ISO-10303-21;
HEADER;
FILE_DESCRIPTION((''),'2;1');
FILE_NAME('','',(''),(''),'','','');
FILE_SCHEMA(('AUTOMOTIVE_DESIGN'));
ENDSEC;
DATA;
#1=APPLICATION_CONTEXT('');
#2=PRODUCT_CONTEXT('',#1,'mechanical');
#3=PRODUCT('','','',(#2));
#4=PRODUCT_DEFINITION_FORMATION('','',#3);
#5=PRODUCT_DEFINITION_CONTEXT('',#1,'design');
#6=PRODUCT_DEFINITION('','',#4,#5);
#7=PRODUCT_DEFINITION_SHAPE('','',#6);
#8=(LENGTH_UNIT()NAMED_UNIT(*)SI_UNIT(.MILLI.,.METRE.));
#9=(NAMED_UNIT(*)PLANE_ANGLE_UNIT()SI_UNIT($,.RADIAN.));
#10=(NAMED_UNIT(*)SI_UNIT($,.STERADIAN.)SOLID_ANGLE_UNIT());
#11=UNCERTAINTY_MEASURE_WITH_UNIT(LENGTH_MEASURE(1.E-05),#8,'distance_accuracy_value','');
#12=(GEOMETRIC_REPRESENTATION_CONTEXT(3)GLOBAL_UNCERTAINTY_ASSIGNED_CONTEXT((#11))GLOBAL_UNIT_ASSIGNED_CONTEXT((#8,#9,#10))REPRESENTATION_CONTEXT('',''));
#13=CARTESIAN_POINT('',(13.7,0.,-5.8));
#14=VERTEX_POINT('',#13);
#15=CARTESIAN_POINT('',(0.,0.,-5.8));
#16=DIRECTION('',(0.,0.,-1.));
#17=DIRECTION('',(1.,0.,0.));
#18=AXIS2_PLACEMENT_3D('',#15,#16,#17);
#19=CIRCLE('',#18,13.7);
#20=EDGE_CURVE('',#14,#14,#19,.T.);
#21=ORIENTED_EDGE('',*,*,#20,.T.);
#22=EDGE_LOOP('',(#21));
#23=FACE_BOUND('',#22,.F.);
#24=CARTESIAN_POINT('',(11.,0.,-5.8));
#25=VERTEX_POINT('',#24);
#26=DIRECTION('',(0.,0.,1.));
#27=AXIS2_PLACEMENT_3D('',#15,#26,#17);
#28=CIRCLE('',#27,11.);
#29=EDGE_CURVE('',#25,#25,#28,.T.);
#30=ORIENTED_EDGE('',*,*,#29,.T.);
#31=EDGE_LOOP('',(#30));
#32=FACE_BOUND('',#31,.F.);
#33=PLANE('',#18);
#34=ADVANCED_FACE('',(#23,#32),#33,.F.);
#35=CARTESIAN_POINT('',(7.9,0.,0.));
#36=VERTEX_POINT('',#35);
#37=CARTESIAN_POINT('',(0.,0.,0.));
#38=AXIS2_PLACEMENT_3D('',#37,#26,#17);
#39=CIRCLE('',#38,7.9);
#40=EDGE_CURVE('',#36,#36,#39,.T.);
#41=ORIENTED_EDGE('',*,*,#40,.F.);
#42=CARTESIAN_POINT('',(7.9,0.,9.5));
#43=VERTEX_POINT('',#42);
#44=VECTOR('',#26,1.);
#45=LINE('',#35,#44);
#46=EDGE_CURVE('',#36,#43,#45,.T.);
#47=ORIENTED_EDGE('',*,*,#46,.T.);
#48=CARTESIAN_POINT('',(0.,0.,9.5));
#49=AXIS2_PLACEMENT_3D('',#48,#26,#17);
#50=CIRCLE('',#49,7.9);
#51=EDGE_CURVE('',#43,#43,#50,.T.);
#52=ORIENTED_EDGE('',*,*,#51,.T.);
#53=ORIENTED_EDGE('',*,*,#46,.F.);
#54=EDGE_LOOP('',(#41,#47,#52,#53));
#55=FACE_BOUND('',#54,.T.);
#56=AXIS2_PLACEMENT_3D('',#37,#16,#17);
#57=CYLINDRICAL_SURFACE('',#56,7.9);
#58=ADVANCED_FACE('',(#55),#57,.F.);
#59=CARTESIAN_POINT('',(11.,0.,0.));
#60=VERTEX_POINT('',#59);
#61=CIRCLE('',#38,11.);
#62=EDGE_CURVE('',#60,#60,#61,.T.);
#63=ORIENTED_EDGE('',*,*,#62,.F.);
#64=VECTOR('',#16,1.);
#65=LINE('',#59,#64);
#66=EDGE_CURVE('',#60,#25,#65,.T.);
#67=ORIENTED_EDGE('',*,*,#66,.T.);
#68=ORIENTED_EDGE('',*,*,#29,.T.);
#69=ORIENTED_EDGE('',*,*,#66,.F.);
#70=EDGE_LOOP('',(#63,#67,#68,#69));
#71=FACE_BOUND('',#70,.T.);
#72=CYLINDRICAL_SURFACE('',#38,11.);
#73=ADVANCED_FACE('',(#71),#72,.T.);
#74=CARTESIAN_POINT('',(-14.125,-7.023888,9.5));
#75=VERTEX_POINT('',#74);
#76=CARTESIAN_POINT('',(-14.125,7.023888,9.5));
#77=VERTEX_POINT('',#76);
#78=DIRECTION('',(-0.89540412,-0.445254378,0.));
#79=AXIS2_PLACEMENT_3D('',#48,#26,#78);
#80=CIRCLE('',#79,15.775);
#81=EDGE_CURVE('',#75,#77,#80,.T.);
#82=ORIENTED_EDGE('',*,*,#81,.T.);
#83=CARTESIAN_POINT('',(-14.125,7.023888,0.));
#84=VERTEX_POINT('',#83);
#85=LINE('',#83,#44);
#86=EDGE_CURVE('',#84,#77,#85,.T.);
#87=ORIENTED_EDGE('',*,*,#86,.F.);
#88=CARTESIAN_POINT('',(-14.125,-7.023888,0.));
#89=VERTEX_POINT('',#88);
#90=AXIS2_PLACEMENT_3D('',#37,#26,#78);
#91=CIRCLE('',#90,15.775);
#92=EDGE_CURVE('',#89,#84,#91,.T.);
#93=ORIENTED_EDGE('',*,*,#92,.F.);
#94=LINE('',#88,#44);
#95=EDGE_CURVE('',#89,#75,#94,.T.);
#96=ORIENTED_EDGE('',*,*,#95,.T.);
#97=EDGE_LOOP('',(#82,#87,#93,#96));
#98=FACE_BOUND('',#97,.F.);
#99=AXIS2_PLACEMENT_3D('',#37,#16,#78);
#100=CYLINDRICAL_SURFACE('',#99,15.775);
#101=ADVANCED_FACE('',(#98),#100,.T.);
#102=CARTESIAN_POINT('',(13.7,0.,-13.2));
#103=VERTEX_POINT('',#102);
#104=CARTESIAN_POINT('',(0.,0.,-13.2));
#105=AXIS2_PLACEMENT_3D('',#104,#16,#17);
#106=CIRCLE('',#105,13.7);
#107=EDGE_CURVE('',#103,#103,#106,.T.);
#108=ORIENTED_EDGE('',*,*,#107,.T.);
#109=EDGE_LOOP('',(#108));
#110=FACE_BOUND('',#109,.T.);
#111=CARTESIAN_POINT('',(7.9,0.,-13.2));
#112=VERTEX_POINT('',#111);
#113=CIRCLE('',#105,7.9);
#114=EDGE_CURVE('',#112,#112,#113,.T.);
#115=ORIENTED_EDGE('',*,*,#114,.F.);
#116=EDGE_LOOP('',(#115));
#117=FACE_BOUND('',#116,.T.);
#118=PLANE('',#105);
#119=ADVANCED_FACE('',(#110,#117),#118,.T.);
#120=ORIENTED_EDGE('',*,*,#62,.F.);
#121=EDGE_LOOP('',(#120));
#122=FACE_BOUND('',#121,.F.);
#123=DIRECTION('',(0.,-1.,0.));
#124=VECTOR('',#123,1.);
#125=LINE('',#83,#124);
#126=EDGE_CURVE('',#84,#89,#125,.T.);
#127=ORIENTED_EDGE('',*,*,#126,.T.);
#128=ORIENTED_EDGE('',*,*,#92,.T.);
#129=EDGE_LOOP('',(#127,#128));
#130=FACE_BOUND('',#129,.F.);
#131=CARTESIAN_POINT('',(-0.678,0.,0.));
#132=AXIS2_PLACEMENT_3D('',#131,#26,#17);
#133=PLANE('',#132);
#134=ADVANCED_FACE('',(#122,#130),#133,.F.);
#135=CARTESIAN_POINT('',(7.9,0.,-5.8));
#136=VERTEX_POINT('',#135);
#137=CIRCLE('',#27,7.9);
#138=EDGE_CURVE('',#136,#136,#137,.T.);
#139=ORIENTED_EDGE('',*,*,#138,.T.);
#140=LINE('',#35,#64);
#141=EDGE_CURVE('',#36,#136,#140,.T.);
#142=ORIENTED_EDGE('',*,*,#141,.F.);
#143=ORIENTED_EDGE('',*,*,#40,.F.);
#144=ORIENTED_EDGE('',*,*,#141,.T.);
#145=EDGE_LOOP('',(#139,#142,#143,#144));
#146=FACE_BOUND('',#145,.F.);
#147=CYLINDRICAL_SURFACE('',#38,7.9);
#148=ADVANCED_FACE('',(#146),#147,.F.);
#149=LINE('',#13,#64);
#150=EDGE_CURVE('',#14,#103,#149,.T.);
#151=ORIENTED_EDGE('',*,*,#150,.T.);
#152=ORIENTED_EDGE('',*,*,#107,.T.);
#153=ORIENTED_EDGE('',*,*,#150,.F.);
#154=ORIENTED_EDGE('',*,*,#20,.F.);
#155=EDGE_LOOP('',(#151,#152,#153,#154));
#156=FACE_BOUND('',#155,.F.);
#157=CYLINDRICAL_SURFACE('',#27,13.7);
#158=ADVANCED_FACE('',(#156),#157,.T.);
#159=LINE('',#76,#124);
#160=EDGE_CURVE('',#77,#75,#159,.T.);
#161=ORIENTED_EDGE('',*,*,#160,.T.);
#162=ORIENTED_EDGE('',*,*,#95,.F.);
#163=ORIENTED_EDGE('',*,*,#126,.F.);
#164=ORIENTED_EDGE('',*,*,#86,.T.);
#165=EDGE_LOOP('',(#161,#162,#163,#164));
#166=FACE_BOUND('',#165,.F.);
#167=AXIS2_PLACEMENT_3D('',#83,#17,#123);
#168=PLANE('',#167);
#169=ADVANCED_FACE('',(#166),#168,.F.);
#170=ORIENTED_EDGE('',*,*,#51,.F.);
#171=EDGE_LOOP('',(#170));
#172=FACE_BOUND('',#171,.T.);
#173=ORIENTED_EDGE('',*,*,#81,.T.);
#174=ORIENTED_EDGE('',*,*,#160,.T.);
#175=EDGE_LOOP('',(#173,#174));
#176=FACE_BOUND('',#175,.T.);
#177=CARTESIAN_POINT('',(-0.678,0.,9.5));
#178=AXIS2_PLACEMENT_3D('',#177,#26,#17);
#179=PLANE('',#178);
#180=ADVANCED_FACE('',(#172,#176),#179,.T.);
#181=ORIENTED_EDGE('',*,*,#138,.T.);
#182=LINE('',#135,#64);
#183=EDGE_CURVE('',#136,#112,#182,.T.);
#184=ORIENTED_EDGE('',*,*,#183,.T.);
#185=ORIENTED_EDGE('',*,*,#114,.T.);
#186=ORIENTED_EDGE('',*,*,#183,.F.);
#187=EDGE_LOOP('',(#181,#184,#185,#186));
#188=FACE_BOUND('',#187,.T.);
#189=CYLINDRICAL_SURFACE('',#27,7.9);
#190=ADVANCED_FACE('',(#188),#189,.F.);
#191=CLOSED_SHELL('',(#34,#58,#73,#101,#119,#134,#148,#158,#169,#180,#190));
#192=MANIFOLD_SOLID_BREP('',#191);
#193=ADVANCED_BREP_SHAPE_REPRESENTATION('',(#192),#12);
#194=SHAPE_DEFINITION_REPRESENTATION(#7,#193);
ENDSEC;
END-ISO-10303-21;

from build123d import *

# Parameters (mm, degrees)
F0_R     = 11
F0_R_2   = 7.9
F1_DEPTH = 9.5
F2_DEPTH = 5.8
F3_R     = 13.7
F3_R_2   = 11
F3_R_3   = 7.9
F4_DEPTH = 7.4


with BuildPart() as f1:
    # F0 (on Top) → F1 (new body)
    with BuildSketch(Plane.XY):
        with BuildLine():
            Line((-14.125, 7.0238878123), (-14.125, -7.0238878123))
            ThreePointArc((-14.125, -7.0238878123), (15.775, 0), (-14.125, 7.0238878123))
        make_face()
        Circle(F0_R, mode=Mode.SUBTRACT)
        Circle(F0_R)
        Circle(F0_R_2, mode=Mode.SUBTRACT)
    extrude(amount=F1_DEPTH)

    # F0 (on Top) → F2 (join)
    with BuildSketch(Plane.XY):
        Circle(F0_R)
        Circle(F0_R_2, mode=Mode.SUBTRACT)
    extrude(amount=-F2_DEPTH)

    # F3 (on face) → F4 (join)
    with BuildSketch(Plane(origin=(0, 0, -5.8), x_dir=(1, 0, 0), z_dir=(0, 0, -1))):
        Circle(F3_R)
        Circle(F3_R_2, mode=Mode.SUBTRACT)
        Circle(F3_R_2)
        Circle(F3_R_3, mode=Mode.SUBTRACT)
    extrude(amount=F4_DEPTH)


solid = f1.part
